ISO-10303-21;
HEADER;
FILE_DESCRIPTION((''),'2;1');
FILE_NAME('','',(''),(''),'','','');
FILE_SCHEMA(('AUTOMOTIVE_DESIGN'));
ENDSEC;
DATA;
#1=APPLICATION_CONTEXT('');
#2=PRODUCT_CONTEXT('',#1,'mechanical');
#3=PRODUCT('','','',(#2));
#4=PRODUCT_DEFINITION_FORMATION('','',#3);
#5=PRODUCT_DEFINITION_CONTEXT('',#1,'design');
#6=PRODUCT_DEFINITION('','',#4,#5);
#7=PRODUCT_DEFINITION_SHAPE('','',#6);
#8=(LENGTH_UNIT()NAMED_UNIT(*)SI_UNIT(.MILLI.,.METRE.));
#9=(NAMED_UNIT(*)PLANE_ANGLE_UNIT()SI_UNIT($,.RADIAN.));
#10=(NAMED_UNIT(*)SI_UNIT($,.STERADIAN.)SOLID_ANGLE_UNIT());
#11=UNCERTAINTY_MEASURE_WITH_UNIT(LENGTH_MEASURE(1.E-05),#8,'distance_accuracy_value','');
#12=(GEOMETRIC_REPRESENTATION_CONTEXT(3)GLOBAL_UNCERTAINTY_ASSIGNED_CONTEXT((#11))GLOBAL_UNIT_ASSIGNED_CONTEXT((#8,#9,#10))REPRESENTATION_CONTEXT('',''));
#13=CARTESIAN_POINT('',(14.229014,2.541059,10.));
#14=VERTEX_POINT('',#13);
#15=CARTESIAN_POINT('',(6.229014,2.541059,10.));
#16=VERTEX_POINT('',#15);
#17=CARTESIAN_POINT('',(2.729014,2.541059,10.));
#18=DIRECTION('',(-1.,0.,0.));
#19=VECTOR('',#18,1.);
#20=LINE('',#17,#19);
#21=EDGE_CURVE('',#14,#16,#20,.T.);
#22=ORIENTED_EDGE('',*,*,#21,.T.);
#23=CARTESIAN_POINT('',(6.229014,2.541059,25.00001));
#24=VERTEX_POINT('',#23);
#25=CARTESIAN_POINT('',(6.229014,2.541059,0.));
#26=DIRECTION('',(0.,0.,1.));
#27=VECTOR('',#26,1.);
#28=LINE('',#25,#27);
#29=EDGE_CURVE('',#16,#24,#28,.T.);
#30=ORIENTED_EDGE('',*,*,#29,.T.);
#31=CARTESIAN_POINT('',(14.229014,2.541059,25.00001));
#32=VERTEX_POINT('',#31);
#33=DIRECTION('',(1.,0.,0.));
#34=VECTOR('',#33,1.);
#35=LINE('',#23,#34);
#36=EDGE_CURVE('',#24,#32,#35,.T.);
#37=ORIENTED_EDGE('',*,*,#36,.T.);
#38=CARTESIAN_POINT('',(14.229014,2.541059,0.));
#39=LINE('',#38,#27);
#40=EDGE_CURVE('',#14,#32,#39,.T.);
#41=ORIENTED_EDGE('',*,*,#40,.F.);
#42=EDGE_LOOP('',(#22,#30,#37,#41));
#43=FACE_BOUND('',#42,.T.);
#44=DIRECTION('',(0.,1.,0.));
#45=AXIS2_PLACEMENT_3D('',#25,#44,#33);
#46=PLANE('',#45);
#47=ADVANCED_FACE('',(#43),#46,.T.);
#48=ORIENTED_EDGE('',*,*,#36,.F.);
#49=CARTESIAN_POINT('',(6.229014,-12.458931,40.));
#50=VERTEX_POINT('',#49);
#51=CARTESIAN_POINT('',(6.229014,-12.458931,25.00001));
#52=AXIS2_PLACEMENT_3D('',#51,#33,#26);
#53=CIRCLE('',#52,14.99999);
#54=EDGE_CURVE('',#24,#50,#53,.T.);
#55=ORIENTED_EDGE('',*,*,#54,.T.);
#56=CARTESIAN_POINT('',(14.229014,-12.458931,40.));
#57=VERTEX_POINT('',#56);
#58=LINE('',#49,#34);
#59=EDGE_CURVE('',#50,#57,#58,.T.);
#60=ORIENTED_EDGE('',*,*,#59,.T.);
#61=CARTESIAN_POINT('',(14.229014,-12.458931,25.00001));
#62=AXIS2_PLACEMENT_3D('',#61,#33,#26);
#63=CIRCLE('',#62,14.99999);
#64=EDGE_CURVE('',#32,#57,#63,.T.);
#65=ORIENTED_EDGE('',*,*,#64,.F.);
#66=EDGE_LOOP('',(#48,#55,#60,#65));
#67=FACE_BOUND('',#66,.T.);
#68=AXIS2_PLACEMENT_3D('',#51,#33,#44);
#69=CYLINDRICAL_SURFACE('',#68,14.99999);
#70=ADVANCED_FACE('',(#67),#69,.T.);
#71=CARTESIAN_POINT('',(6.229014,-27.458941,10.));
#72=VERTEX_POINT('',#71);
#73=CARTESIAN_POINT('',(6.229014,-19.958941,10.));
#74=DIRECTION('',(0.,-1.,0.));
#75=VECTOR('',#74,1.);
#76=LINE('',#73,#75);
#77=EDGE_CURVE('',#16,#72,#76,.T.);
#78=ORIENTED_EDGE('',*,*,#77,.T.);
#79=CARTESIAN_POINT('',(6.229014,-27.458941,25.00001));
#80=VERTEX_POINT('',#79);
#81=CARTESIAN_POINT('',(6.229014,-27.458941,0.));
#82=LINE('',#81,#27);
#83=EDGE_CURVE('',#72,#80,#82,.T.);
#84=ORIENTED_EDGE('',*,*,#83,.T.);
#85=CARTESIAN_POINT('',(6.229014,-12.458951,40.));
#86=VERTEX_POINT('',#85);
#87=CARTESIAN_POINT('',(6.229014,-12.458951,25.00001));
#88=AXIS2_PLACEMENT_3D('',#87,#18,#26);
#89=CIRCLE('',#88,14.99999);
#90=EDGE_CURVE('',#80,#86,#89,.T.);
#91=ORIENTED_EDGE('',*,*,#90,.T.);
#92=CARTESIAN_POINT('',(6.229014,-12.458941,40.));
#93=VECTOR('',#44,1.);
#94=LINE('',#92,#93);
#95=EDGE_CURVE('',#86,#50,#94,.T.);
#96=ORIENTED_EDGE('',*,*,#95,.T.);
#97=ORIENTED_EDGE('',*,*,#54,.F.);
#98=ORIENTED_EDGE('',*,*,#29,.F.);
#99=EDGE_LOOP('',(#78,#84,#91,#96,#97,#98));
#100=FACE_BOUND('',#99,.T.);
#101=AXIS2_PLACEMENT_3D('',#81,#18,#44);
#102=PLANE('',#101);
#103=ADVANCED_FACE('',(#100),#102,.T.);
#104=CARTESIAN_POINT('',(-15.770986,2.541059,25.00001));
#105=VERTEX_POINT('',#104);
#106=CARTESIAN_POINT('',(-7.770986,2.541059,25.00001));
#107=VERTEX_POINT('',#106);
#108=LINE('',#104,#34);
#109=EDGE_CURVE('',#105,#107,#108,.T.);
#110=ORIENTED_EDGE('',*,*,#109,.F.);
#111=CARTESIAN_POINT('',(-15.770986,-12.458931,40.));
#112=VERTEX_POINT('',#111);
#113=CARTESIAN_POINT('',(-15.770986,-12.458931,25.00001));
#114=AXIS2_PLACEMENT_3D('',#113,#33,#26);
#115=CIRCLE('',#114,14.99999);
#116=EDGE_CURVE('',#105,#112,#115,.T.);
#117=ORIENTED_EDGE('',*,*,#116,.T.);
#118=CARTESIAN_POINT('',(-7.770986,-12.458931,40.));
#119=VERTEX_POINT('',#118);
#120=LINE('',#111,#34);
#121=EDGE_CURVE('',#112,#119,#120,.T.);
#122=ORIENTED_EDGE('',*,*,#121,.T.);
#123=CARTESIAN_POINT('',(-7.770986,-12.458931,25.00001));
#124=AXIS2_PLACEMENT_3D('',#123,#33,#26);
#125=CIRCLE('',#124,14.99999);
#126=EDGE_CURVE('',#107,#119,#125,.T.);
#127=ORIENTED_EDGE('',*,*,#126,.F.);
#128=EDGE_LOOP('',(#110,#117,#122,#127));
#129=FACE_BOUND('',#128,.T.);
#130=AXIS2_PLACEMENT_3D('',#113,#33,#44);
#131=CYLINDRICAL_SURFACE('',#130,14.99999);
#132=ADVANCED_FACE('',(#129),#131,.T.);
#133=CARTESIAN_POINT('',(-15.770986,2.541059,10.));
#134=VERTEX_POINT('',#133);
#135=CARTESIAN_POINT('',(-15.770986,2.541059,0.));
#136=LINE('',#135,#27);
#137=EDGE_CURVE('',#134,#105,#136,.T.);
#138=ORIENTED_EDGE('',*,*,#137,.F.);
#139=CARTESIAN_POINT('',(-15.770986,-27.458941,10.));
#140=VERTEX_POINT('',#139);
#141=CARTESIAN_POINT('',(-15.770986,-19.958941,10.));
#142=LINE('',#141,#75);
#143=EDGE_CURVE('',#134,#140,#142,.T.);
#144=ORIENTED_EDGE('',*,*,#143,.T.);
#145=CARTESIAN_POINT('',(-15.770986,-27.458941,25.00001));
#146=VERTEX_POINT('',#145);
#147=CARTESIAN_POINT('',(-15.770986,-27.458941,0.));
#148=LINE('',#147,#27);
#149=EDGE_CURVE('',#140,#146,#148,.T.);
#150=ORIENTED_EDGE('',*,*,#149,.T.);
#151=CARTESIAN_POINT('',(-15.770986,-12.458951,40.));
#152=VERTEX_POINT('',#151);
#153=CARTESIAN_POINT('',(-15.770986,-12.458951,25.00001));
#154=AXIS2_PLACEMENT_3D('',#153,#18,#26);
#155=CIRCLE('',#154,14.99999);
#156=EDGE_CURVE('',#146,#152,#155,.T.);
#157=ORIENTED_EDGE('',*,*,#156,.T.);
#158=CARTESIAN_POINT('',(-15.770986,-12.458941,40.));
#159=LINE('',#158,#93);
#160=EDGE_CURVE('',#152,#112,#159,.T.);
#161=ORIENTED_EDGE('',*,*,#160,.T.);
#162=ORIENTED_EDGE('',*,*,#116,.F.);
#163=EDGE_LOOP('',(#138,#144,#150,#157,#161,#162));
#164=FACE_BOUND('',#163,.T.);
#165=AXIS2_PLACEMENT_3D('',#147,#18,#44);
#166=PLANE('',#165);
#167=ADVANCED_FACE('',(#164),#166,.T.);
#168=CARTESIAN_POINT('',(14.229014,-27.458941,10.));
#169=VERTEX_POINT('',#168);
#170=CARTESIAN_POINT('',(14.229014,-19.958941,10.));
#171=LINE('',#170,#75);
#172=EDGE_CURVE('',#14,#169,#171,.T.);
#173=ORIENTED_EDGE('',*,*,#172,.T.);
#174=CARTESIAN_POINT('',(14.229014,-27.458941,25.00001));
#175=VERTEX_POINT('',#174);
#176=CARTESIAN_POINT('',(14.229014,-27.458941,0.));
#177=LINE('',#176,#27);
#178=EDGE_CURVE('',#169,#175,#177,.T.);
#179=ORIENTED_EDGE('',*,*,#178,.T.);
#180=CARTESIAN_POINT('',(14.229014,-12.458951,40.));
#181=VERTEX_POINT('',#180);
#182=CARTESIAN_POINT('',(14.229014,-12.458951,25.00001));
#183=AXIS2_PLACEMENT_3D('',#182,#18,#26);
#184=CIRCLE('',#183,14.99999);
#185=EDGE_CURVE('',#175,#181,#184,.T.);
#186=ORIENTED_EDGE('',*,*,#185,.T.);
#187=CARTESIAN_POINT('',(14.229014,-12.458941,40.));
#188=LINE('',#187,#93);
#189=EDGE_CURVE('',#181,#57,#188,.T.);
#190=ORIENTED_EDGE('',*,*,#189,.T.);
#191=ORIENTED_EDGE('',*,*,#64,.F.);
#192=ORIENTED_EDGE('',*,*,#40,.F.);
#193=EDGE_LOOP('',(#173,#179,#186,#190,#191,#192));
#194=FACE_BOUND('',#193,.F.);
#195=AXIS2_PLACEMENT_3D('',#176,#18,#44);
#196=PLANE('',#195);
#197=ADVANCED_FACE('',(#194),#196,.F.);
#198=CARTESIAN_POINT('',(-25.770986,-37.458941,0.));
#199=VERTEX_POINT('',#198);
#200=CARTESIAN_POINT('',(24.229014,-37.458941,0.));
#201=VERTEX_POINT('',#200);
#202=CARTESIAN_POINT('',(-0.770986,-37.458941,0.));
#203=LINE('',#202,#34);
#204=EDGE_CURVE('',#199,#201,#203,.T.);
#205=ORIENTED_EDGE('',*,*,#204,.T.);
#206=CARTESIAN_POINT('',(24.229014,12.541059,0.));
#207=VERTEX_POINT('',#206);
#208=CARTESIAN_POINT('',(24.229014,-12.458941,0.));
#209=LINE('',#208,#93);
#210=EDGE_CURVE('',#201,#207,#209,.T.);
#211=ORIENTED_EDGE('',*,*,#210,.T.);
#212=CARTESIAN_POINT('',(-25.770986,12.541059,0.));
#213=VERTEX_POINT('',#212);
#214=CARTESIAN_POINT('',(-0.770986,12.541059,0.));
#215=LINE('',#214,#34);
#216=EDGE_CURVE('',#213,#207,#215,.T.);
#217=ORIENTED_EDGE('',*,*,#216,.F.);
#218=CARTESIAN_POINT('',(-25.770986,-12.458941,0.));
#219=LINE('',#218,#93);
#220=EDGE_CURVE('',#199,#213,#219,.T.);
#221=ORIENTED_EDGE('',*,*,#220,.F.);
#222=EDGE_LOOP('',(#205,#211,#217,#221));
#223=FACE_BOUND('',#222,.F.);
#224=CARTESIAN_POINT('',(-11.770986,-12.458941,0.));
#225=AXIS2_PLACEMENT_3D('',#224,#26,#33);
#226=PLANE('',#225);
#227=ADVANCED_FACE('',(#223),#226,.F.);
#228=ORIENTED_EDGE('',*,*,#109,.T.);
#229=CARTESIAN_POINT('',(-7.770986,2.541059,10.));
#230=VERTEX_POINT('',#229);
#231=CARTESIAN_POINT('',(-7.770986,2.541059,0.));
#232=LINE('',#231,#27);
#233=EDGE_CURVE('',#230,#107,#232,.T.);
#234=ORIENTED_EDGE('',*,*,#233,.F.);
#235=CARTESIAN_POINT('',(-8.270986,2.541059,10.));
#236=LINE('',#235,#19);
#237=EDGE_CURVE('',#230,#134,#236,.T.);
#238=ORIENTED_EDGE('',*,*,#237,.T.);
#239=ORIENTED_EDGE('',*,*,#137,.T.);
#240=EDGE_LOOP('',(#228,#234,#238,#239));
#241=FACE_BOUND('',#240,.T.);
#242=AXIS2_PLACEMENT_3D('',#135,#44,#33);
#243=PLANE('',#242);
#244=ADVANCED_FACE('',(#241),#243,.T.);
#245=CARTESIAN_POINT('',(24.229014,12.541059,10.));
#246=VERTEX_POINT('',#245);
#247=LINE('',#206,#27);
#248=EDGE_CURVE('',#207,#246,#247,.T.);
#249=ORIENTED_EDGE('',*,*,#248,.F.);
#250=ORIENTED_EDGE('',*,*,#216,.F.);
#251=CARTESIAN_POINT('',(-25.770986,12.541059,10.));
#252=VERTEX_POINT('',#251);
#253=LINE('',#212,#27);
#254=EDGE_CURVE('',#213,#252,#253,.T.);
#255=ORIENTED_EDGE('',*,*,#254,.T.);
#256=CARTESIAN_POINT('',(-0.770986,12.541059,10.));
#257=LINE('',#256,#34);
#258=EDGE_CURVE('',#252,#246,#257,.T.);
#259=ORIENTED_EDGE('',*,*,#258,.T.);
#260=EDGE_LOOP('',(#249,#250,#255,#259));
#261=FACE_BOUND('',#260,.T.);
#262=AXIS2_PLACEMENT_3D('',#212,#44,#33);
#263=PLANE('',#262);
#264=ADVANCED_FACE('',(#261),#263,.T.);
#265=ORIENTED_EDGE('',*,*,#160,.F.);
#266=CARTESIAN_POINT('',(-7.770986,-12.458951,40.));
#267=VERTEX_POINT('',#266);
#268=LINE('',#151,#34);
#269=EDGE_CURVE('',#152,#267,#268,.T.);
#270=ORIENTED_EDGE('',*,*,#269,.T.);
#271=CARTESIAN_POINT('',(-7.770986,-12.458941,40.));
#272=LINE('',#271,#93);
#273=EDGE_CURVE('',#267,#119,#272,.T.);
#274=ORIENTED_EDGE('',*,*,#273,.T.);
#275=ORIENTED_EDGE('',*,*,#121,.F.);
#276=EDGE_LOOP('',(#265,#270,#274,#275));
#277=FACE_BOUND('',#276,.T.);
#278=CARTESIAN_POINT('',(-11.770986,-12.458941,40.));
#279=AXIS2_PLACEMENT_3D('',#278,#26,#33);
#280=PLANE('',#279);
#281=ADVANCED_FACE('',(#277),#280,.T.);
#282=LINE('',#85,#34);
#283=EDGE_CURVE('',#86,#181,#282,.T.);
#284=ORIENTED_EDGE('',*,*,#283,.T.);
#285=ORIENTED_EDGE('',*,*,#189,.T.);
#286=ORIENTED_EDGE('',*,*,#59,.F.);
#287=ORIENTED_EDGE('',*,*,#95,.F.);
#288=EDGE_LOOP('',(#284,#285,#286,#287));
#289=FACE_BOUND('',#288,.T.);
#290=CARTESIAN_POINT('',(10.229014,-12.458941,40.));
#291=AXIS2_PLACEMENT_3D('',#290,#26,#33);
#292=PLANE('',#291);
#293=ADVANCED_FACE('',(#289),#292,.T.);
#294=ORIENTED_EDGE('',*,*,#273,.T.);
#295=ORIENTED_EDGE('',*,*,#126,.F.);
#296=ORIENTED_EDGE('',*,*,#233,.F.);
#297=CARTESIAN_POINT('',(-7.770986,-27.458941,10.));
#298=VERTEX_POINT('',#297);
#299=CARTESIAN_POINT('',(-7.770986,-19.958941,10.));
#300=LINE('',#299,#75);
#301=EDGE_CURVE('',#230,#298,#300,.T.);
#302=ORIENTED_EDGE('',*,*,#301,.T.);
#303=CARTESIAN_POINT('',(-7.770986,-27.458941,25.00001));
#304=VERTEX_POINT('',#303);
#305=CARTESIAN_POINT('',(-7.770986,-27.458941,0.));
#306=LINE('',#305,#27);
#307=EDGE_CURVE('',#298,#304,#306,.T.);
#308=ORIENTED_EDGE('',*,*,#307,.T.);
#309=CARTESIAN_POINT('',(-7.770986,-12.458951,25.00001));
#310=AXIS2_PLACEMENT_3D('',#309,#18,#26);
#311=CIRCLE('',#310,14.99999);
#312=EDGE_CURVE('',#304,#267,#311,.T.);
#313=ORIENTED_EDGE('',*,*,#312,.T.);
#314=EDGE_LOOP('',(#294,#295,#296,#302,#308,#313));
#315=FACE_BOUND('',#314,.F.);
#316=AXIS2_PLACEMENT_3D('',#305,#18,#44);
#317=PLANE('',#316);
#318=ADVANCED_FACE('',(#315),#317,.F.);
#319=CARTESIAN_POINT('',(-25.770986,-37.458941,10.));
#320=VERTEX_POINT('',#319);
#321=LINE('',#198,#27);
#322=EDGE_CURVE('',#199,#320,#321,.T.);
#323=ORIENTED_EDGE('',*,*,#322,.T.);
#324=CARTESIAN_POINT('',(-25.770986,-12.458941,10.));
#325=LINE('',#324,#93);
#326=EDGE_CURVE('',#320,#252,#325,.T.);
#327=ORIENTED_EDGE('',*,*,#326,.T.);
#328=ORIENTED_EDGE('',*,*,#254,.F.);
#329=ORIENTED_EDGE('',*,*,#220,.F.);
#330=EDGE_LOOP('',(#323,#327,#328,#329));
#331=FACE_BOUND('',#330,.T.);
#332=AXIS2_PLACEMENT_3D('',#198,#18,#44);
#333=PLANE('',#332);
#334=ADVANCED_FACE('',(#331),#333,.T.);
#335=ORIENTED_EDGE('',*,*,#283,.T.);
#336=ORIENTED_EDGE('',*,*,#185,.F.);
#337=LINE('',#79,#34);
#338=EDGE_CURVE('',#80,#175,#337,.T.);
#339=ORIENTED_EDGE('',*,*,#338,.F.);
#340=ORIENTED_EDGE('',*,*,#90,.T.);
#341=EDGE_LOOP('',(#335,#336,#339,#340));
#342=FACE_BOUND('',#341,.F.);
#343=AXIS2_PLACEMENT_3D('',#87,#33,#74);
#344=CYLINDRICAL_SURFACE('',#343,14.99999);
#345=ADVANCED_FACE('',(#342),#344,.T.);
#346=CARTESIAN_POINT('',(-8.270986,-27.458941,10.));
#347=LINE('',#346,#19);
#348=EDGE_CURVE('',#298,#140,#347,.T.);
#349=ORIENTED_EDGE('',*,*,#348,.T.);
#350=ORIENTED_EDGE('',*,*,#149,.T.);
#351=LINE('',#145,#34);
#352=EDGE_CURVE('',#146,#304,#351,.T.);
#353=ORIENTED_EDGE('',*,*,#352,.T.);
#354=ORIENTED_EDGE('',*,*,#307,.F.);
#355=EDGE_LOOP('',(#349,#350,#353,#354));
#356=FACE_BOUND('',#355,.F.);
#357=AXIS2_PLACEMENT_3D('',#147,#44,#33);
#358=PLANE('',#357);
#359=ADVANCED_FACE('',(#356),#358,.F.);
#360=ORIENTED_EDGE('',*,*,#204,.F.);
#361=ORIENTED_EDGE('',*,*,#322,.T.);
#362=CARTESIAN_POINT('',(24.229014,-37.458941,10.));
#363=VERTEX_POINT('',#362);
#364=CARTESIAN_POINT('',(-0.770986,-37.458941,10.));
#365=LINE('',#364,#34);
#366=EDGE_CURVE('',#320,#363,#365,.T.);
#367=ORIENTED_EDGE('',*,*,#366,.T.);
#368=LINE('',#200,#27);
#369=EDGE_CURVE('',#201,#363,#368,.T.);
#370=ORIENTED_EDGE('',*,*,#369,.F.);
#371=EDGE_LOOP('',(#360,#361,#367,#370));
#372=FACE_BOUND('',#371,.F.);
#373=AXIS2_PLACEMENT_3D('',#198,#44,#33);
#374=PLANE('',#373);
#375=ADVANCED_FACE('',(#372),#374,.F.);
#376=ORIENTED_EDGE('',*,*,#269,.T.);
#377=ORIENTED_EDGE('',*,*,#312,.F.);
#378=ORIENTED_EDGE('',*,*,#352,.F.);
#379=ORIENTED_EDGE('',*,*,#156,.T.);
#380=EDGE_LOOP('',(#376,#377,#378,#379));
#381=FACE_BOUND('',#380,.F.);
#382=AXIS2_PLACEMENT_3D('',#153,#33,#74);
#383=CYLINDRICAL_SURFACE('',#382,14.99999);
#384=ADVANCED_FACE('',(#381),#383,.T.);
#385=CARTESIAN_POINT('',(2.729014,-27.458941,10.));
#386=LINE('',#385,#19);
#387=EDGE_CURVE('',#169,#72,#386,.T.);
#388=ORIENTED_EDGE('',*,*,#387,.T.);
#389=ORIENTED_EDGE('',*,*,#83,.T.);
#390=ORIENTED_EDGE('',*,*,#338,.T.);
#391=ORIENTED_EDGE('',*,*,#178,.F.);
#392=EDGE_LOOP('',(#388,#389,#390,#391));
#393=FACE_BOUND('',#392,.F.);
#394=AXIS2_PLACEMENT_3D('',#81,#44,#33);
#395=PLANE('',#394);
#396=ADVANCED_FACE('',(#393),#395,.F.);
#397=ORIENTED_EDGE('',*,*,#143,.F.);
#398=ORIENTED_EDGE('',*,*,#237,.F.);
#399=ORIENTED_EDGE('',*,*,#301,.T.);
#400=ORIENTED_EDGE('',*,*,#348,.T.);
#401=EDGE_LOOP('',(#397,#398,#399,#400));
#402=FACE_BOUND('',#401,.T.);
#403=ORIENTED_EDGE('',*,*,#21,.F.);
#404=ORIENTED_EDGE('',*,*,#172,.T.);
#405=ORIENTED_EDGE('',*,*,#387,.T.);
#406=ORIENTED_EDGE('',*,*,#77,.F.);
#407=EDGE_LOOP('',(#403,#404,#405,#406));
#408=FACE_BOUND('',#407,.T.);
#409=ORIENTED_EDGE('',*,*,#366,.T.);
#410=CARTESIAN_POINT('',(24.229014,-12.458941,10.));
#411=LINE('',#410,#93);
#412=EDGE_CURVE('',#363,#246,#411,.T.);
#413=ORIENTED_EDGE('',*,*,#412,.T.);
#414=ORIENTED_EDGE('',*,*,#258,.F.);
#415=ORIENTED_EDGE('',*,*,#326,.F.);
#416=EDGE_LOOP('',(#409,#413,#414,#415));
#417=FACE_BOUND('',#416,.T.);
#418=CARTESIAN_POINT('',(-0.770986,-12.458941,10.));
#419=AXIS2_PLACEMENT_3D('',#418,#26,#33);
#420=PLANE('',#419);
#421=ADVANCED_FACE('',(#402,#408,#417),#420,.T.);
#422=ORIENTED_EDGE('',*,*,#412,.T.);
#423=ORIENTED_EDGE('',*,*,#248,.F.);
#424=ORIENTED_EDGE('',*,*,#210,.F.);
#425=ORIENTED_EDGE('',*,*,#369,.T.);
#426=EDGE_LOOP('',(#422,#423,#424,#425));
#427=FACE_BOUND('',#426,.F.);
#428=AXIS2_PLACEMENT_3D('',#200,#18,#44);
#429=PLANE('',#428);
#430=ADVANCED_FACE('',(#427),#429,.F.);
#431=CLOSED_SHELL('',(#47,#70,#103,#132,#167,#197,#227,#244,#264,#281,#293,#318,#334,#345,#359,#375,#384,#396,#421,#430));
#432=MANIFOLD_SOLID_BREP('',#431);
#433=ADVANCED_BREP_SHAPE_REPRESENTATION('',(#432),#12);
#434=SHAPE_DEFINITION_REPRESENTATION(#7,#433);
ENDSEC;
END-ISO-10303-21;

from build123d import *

# Parameters (mm, degrees)
F0_W     = 50
F0_H     = 50
F3_DEPTH = 10
F2_W     = 8
F2_H     = 30
F4_DEPTH = 40
F1_W     = 8
F1_H     = 30
F5_DEPTH = 40
F6_R     = 14.99999
F7_R     = 14.99999


# Not quite as in the source:
# - a fillet or chamfer is up to 0.001 mm smaller than in the source, because OpenCascade refuses the exact size


with BuildPart() as f3:
    # F0 (on Top) → F3 (new body)
    with BuildSketch(Plane.XY):
        with Locations((-0.7709864527, -12.4589413404)):
            Rectangle(F0_W, F0_H)
    extrude(amount=F3_DEPTH)

    # F2 (on face) → F4 (join)
    with BuildSketch(Plane.XY):
        with Locations((10.2290135473, -12.4589413404)):
            Rectangle(F2_W, F2_H)
    extrude(amount=F4_DEPTH)

    # F1 (on face) → F5 (join)
    with BuildSketch(Plane.XY):
        with Locations((-11.7709864527, -12.4589413404)):
            Rectangle(F1_W, F1_H)
    extrude(amount=F5_DEPTH)

    # F6 (radius 15 in the source; OpenCascade refuses exactly that, so slightly less here)
    f6_edges = [f3.edges().sort_by_distance(p)[0] for p in [
        (-11.770986, -27.458941, 40),
        (-11.770986, 2.541059, 40),
    ]]
    fillet(f6_edges, radius=F6_R)

    # F7 (radius 15 in the source; OpenCascade refuses exactly that, so slightly less here)
    f7_edges = [f3.edges().sort_by_distance(p)[0] for p in [
        (10.229014, 2.541059, 40),
        (10.229014, -27.458941, 40),
    ]]
    fillet(f7_edges, radius=F7_R)


solid = f3.part
